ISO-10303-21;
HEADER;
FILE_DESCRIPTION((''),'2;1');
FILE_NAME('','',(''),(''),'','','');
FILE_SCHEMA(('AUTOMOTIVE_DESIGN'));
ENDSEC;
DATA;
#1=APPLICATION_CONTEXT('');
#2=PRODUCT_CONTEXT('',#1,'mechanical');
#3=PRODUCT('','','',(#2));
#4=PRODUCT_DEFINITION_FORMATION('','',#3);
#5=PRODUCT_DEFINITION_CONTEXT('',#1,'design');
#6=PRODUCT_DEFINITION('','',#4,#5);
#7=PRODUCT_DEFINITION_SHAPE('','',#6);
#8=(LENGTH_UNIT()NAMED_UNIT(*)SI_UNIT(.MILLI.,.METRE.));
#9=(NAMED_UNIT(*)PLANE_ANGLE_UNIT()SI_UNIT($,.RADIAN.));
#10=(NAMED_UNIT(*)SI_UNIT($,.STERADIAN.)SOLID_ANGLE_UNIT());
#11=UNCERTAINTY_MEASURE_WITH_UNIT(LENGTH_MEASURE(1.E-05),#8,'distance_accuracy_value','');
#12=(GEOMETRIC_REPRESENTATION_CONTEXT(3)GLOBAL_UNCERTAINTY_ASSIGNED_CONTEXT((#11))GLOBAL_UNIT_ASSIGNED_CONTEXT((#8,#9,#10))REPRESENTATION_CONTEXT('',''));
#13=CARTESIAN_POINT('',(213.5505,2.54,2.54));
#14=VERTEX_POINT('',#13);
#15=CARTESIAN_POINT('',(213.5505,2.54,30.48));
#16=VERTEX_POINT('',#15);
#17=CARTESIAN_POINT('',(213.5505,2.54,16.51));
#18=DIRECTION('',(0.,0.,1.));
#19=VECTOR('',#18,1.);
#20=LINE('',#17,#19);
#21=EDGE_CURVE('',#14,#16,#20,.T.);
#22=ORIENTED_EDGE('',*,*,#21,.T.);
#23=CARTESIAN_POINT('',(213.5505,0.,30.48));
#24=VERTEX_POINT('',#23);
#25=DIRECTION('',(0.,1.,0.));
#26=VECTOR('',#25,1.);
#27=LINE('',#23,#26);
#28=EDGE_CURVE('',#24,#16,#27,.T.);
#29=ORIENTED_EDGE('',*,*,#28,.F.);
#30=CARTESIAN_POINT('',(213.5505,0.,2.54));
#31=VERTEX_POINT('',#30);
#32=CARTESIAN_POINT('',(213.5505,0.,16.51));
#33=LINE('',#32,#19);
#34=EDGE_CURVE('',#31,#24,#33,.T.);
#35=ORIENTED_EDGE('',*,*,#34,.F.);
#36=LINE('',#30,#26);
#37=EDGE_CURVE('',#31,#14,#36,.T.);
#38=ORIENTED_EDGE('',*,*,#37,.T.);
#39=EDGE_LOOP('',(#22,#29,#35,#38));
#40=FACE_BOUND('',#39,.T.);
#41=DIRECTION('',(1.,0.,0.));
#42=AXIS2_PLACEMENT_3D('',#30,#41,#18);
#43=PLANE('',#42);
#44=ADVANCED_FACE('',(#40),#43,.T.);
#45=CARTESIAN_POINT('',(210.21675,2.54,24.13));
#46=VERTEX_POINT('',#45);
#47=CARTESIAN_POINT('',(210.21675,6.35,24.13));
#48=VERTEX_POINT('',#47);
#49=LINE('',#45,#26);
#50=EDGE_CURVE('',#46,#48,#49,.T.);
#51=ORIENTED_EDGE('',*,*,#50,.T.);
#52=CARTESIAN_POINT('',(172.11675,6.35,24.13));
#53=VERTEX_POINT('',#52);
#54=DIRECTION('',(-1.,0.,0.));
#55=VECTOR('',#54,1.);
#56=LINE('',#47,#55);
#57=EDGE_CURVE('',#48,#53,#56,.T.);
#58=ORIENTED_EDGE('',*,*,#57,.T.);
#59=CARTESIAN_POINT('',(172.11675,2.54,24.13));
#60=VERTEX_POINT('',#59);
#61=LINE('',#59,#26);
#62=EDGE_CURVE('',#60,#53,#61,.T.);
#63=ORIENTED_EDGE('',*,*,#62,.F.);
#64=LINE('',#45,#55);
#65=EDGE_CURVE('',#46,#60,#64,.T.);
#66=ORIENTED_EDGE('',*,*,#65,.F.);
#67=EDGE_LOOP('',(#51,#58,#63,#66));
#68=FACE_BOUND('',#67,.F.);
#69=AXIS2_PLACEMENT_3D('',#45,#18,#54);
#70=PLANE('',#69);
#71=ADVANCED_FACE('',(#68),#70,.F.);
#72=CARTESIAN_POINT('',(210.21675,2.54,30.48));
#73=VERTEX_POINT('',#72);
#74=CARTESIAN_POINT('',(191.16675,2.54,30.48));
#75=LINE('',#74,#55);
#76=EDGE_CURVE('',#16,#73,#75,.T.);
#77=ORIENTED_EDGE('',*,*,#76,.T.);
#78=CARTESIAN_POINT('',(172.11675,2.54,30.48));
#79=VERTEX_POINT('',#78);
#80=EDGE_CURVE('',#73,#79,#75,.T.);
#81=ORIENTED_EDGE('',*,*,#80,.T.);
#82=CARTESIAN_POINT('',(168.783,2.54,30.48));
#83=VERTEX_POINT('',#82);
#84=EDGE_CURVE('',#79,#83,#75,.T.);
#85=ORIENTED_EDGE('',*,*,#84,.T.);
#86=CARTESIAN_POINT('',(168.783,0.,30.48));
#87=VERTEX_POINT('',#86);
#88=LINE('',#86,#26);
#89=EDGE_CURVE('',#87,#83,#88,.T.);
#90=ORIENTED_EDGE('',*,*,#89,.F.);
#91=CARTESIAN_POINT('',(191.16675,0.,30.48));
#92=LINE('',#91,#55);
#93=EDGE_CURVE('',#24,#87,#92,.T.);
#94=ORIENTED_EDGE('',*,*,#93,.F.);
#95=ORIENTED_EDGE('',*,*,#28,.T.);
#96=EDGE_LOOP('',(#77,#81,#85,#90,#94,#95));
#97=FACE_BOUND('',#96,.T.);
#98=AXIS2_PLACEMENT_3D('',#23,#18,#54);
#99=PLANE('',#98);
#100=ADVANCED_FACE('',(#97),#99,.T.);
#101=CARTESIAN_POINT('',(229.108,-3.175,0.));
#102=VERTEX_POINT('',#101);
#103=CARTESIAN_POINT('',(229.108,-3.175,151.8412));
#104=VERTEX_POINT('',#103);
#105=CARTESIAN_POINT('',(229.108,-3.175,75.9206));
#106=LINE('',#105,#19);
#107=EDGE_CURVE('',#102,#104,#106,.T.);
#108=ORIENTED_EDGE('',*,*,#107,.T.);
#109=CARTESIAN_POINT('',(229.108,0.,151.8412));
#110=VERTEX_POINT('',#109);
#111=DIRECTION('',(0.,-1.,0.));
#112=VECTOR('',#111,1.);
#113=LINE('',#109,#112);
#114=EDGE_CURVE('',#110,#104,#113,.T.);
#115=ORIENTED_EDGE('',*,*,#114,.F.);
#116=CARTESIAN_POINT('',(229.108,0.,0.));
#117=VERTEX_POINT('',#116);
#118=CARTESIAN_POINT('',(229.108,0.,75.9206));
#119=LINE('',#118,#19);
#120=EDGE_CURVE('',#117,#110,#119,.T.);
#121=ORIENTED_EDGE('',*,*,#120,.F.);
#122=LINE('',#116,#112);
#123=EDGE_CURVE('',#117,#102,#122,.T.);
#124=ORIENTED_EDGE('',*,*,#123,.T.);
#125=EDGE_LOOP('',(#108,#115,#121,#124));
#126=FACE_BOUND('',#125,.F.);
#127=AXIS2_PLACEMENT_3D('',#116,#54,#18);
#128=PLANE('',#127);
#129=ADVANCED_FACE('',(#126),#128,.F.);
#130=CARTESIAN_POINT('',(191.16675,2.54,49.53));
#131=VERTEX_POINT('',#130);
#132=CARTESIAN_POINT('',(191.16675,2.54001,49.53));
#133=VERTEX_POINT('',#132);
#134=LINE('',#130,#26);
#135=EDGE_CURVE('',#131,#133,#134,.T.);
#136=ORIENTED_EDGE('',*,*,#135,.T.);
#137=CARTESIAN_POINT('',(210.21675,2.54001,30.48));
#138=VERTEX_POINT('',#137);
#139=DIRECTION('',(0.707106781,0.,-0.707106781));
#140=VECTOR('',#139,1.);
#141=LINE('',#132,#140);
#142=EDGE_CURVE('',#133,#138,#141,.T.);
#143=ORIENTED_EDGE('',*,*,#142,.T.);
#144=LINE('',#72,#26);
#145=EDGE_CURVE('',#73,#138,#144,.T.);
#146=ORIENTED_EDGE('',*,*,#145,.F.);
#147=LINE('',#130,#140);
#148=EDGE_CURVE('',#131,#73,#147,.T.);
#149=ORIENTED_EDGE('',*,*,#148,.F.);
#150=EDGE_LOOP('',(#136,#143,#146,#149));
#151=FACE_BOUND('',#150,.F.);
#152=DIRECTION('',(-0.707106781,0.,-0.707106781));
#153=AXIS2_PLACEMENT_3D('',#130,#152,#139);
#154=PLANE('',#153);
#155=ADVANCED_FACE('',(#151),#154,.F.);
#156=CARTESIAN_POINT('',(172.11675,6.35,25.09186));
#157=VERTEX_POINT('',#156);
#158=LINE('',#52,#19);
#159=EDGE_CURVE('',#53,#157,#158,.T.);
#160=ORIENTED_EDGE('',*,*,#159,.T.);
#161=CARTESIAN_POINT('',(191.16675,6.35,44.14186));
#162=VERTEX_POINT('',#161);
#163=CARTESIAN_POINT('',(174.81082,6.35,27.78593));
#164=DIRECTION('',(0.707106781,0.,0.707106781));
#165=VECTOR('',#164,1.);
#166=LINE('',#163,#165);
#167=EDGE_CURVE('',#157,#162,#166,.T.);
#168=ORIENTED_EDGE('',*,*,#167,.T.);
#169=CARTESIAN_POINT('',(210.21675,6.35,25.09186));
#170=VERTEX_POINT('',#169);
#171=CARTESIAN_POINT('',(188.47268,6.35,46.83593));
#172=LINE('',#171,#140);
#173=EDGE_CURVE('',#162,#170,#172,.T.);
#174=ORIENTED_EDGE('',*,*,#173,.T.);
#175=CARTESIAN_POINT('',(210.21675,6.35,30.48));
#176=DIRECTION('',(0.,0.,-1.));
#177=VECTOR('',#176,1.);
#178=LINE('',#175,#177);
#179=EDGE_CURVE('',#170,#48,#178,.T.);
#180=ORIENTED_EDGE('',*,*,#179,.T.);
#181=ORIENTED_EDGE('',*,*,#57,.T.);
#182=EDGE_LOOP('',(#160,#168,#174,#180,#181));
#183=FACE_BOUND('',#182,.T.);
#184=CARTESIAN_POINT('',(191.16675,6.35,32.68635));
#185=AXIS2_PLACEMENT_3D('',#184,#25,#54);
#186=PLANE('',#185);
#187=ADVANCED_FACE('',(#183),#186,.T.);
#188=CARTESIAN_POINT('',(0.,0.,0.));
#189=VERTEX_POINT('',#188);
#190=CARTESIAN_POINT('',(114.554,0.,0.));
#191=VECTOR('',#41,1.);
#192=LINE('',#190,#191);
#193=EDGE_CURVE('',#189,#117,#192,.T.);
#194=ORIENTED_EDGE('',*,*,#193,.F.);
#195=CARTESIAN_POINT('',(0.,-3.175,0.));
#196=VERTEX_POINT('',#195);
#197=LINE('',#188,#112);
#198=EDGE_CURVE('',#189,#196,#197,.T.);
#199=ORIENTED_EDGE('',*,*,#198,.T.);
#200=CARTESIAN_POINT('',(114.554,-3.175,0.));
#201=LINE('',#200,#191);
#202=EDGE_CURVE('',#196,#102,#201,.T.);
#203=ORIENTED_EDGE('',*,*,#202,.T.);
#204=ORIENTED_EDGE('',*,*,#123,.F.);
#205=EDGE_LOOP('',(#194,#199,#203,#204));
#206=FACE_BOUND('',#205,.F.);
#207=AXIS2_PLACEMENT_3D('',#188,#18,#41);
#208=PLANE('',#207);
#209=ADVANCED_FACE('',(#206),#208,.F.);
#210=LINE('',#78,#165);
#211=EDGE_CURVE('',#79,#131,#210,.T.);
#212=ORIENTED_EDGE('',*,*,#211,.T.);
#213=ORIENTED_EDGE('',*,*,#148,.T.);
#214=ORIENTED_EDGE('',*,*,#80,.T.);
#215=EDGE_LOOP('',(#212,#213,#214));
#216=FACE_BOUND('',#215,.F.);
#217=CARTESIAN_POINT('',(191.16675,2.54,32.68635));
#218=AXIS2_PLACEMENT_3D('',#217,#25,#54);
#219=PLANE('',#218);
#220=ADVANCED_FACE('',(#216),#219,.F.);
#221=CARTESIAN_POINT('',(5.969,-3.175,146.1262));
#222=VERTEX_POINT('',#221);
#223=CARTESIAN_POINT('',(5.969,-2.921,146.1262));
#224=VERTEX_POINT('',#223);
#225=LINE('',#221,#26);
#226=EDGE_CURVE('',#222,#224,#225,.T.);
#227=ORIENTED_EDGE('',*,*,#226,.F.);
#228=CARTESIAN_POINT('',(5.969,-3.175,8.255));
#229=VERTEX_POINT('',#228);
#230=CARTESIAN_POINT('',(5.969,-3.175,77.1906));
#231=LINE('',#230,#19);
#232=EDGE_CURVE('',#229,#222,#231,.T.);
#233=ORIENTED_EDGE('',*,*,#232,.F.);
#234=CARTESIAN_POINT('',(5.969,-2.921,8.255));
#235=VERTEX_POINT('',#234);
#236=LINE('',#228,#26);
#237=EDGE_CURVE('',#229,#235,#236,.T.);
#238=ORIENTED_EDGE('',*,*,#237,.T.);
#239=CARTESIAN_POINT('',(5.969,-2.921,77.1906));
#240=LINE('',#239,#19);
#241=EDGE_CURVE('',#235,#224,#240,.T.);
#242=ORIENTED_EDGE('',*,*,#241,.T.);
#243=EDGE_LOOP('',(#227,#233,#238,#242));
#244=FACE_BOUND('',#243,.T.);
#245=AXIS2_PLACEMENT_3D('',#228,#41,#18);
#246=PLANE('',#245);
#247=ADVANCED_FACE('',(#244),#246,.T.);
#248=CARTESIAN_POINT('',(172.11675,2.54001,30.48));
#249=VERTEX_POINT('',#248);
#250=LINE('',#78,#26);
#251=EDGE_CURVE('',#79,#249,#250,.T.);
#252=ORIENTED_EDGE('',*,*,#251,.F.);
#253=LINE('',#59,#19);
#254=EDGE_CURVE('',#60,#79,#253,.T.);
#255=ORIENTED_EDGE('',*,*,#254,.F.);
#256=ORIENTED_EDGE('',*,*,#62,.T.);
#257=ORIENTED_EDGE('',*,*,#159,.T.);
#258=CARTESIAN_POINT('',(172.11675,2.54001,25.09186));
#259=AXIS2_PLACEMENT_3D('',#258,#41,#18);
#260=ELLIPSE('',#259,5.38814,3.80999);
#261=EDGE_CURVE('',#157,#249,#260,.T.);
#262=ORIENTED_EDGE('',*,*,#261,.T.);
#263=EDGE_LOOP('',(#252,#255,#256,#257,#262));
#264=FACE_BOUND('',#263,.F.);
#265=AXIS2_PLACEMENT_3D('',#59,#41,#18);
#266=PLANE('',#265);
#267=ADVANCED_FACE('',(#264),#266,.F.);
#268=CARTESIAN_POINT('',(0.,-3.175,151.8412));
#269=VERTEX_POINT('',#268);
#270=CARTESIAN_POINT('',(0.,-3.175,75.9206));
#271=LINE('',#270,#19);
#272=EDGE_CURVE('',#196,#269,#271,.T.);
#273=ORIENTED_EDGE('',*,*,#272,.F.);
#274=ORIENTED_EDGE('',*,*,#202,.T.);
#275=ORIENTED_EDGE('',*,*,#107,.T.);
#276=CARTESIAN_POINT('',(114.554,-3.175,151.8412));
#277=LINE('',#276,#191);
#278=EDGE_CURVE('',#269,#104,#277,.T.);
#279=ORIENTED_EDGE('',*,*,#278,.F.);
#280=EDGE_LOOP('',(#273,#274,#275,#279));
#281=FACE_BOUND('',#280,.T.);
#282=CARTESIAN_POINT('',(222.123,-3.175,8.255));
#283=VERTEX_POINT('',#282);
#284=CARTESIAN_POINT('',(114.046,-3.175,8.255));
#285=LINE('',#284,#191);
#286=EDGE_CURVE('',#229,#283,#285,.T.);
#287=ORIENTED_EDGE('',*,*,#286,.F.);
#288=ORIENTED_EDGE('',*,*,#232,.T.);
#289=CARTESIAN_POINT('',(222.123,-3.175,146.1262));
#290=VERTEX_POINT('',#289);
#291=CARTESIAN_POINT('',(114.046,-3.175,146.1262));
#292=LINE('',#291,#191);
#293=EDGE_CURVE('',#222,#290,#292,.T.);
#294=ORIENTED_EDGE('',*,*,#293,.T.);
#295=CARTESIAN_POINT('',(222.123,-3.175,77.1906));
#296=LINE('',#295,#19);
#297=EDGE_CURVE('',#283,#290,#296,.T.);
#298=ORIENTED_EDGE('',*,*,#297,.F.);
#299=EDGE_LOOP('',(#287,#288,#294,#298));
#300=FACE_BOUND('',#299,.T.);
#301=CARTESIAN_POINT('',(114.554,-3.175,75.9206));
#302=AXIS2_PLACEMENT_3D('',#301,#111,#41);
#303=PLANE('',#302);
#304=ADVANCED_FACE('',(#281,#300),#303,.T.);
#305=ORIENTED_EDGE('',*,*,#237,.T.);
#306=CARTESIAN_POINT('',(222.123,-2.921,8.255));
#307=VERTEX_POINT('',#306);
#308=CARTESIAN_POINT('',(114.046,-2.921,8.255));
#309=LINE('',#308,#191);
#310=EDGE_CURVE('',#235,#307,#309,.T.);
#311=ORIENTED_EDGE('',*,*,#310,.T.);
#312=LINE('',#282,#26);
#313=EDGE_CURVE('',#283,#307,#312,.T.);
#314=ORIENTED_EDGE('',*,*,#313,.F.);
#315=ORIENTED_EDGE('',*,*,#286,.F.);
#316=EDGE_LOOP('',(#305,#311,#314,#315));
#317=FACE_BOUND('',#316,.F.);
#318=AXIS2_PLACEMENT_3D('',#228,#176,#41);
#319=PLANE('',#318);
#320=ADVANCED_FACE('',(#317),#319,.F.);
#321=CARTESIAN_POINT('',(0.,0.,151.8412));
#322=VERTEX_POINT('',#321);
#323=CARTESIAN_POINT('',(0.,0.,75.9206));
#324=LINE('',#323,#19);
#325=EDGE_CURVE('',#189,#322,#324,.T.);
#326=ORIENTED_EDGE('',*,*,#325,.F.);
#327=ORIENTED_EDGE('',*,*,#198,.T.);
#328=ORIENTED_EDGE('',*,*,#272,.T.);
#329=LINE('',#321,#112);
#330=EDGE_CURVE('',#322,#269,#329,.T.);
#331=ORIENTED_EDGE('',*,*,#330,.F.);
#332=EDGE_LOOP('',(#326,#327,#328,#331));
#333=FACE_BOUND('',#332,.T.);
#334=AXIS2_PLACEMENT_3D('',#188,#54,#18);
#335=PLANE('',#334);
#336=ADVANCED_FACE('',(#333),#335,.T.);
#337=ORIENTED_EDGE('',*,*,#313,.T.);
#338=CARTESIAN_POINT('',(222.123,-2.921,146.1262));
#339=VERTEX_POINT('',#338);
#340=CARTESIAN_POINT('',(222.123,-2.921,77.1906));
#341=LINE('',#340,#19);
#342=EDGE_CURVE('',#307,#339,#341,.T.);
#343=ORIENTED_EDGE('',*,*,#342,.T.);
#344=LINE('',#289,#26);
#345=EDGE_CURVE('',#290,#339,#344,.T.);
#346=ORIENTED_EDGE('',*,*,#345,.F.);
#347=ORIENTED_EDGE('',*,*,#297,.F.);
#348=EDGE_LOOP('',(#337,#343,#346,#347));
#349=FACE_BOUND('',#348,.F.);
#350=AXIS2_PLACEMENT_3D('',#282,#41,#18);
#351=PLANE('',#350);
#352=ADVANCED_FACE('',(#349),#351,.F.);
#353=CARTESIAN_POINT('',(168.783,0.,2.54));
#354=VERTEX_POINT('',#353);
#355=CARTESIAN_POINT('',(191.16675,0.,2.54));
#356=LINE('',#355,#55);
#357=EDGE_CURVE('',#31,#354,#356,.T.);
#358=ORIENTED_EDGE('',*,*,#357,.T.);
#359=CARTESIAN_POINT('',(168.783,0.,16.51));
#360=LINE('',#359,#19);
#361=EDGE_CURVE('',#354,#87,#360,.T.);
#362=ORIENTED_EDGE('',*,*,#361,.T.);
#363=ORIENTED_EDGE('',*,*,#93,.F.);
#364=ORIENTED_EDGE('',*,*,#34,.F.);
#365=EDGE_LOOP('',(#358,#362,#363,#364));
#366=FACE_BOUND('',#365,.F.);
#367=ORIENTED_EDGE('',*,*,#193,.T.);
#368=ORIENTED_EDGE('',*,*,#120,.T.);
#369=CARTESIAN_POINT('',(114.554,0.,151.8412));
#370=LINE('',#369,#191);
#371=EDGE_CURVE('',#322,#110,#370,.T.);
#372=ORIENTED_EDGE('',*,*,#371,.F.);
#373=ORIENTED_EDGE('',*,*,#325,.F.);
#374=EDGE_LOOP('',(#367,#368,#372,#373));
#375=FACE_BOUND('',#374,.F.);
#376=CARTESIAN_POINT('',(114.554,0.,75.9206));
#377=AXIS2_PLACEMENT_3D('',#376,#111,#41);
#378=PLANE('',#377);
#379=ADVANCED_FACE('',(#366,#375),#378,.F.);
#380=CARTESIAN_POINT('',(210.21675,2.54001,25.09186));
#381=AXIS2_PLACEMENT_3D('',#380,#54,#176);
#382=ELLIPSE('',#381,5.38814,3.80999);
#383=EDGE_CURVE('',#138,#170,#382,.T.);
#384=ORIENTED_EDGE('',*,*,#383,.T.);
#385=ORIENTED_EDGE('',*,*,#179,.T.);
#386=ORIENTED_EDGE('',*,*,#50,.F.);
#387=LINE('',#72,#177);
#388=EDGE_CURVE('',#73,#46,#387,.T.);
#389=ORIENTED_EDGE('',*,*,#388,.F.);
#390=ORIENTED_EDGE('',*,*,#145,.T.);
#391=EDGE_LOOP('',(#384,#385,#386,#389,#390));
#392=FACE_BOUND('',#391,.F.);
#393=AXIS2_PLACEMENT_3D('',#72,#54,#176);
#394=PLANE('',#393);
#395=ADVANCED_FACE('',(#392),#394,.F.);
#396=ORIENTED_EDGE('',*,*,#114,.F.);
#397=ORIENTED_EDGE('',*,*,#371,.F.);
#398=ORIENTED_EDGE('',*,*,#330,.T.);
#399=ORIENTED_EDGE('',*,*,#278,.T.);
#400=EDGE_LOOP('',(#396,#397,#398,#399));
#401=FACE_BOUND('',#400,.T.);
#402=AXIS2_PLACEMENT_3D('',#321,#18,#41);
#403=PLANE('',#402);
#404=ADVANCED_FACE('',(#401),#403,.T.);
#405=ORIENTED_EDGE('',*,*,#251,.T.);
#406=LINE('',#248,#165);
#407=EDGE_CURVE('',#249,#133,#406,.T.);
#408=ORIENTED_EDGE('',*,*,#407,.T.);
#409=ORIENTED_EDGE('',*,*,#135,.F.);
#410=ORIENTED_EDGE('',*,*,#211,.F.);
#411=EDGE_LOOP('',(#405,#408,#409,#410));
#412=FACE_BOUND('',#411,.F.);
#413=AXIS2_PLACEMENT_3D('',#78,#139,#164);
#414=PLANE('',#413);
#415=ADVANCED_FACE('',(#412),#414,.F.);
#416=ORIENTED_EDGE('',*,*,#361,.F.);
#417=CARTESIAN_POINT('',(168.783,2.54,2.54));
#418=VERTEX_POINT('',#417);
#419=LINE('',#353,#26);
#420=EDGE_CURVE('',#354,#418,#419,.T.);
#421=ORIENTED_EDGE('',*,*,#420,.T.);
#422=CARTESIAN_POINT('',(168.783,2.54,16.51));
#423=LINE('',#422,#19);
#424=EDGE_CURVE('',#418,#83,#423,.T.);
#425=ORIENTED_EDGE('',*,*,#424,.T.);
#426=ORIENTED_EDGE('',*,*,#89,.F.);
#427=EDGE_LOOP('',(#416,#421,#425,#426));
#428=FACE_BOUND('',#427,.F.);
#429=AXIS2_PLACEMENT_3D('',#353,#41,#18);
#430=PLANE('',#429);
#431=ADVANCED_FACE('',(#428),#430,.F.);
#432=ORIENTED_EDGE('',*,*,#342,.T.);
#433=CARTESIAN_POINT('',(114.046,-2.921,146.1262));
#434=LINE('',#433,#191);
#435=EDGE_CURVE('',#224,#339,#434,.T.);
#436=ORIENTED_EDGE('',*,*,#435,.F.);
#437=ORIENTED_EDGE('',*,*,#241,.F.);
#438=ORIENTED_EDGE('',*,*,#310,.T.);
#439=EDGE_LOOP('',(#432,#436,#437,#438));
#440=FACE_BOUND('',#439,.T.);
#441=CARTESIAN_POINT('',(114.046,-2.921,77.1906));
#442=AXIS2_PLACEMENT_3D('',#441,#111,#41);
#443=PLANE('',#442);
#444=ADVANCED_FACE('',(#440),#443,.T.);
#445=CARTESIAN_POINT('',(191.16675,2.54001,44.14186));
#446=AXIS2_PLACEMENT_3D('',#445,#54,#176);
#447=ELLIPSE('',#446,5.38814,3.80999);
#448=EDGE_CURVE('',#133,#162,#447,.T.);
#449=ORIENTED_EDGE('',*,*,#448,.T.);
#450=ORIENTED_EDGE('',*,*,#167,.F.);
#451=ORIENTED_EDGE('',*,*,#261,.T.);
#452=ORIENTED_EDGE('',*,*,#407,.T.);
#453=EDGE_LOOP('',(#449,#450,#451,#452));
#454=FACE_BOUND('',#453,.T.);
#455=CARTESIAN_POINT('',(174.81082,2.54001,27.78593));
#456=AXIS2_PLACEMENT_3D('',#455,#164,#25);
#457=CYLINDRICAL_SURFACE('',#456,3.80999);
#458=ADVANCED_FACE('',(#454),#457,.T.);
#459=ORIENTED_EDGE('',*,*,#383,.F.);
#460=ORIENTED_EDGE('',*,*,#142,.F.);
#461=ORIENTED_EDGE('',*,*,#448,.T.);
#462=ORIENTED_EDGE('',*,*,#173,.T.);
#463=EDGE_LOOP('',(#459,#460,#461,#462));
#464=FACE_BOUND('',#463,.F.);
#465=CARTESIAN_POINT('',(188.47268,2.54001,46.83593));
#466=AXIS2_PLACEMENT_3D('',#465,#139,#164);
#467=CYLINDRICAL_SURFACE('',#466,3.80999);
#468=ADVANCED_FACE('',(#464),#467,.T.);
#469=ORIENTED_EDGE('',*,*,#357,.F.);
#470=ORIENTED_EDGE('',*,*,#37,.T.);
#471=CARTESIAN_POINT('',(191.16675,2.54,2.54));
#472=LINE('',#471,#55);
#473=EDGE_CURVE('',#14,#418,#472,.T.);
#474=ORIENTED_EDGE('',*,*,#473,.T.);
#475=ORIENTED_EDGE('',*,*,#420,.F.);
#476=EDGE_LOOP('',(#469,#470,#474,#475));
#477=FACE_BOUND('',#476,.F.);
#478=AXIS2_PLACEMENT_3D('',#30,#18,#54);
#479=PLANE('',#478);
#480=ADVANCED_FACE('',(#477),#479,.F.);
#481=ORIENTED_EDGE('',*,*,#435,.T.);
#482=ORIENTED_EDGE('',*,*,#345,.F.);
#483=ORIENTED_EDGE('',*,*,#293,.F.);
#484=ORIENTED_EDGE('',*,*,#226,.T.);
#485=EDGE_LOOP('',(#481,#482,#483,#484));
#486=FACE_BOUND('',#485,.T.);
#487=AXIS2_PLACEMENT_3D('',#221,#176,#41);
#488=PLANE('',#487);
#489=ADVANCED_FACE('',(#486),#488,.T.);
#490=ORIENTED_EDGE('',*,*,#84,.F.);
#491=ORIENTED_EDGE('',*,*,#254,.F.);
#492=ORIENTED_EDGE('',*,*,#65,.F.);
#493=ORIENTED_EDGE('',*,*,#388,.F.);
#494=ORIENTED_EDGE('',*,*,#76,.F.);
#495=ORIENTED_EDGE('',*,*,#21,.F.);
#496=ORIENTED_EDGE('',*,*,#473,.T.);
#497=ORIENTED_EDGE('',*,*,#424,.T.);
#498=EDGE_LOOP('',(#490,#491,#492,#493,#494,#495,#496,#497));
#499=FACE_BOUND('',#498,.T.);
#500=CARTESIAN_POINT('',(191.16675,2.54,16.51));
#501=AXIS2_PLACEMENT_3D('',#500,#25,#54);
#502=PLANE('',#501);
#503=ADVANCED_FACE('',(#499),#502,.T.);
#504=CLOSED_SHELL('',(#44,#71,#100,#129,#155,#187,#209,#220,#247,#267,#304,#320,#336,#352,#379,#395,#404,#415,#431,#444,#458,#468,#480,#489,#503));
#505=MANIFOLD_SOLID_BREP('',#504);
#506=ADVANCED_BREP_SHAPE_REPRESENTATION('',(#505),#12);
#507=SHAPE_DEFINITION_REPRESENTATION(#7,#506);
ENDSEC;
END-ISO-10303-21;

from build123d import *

# Parameters (mm, degrees)
F0_W     = 229.108
F0_H     = 151.8412
F1_DEPTH = 3.175
F2_W     = 216.154
F2_H     = 137.8712
F3_DEPTH = 0.254
F4_W     = 44.7675
F4_H     = 27.94
F5_DEPTH = 2.54
F7_DEPTH = 3.81
F8_R     = 3.80999


# Not quite as in the source:
# - a fillet or chamfer is up to 0.001 mm smaller than in the source, because OpenCascade refuses the exact size


with BuildPart() as f1:
    # F0 (on Front) → F1 (new body)
    with BuildSketch(Plane.XZ):
        with Locations((114.554, 75.9206)):
            Rectangle(F0_W, F0_H)
    extrude(amount=F1_DEPTH)

    # F2 (on face) → F3 (cut)
    with BuildSketch(Plane.XZ.offset(3.175)):
        with Locations((114.046, 77.1906)):
            Rectangle(F2_W, F2_H)
    extrude(amount=-F3_DEPTH, mode=Mode.SUBTRACT)

    # F4 (on face) → F5 (join)
    with BuildSketch(Plane(origin=(0, 0, 0), x_dir=(-1, 0, 0), z_dir=(0, 1, 0))):
        with Locations((-191.16675, 16.51)):
            Rectangle(F4_W, F4_H)
    extrude(amount=F5_DEPTH)

    # F6 (on face) → F7 (join)
    with BuildSketch(Plane(origin=(0, 2.54, 0), x_dir=(-1, 0, 0), z_dir=(0, 1, 0))):
        Polygon((-210.21675, 30.48), (-210.21675, 24.13), (-172.11675, 24.13), (-172.11675, 30.48), (-191.16675, 49.53), align=None)
    extrude(amount=F7_DEPTH)

    # F8 (radius 3.81 in the source; OpenCascade refuses exactly that, so slightly less here)
    f8_edges = [f1.edges().sort_by_distance(p)[0] for p in [
        (200.69175, 6.35, 40.005),
        (181.64175, 6.35, 40.005),
    ]]
    fillet(f8_edges, radius=F8_R)


solid = f1.part
